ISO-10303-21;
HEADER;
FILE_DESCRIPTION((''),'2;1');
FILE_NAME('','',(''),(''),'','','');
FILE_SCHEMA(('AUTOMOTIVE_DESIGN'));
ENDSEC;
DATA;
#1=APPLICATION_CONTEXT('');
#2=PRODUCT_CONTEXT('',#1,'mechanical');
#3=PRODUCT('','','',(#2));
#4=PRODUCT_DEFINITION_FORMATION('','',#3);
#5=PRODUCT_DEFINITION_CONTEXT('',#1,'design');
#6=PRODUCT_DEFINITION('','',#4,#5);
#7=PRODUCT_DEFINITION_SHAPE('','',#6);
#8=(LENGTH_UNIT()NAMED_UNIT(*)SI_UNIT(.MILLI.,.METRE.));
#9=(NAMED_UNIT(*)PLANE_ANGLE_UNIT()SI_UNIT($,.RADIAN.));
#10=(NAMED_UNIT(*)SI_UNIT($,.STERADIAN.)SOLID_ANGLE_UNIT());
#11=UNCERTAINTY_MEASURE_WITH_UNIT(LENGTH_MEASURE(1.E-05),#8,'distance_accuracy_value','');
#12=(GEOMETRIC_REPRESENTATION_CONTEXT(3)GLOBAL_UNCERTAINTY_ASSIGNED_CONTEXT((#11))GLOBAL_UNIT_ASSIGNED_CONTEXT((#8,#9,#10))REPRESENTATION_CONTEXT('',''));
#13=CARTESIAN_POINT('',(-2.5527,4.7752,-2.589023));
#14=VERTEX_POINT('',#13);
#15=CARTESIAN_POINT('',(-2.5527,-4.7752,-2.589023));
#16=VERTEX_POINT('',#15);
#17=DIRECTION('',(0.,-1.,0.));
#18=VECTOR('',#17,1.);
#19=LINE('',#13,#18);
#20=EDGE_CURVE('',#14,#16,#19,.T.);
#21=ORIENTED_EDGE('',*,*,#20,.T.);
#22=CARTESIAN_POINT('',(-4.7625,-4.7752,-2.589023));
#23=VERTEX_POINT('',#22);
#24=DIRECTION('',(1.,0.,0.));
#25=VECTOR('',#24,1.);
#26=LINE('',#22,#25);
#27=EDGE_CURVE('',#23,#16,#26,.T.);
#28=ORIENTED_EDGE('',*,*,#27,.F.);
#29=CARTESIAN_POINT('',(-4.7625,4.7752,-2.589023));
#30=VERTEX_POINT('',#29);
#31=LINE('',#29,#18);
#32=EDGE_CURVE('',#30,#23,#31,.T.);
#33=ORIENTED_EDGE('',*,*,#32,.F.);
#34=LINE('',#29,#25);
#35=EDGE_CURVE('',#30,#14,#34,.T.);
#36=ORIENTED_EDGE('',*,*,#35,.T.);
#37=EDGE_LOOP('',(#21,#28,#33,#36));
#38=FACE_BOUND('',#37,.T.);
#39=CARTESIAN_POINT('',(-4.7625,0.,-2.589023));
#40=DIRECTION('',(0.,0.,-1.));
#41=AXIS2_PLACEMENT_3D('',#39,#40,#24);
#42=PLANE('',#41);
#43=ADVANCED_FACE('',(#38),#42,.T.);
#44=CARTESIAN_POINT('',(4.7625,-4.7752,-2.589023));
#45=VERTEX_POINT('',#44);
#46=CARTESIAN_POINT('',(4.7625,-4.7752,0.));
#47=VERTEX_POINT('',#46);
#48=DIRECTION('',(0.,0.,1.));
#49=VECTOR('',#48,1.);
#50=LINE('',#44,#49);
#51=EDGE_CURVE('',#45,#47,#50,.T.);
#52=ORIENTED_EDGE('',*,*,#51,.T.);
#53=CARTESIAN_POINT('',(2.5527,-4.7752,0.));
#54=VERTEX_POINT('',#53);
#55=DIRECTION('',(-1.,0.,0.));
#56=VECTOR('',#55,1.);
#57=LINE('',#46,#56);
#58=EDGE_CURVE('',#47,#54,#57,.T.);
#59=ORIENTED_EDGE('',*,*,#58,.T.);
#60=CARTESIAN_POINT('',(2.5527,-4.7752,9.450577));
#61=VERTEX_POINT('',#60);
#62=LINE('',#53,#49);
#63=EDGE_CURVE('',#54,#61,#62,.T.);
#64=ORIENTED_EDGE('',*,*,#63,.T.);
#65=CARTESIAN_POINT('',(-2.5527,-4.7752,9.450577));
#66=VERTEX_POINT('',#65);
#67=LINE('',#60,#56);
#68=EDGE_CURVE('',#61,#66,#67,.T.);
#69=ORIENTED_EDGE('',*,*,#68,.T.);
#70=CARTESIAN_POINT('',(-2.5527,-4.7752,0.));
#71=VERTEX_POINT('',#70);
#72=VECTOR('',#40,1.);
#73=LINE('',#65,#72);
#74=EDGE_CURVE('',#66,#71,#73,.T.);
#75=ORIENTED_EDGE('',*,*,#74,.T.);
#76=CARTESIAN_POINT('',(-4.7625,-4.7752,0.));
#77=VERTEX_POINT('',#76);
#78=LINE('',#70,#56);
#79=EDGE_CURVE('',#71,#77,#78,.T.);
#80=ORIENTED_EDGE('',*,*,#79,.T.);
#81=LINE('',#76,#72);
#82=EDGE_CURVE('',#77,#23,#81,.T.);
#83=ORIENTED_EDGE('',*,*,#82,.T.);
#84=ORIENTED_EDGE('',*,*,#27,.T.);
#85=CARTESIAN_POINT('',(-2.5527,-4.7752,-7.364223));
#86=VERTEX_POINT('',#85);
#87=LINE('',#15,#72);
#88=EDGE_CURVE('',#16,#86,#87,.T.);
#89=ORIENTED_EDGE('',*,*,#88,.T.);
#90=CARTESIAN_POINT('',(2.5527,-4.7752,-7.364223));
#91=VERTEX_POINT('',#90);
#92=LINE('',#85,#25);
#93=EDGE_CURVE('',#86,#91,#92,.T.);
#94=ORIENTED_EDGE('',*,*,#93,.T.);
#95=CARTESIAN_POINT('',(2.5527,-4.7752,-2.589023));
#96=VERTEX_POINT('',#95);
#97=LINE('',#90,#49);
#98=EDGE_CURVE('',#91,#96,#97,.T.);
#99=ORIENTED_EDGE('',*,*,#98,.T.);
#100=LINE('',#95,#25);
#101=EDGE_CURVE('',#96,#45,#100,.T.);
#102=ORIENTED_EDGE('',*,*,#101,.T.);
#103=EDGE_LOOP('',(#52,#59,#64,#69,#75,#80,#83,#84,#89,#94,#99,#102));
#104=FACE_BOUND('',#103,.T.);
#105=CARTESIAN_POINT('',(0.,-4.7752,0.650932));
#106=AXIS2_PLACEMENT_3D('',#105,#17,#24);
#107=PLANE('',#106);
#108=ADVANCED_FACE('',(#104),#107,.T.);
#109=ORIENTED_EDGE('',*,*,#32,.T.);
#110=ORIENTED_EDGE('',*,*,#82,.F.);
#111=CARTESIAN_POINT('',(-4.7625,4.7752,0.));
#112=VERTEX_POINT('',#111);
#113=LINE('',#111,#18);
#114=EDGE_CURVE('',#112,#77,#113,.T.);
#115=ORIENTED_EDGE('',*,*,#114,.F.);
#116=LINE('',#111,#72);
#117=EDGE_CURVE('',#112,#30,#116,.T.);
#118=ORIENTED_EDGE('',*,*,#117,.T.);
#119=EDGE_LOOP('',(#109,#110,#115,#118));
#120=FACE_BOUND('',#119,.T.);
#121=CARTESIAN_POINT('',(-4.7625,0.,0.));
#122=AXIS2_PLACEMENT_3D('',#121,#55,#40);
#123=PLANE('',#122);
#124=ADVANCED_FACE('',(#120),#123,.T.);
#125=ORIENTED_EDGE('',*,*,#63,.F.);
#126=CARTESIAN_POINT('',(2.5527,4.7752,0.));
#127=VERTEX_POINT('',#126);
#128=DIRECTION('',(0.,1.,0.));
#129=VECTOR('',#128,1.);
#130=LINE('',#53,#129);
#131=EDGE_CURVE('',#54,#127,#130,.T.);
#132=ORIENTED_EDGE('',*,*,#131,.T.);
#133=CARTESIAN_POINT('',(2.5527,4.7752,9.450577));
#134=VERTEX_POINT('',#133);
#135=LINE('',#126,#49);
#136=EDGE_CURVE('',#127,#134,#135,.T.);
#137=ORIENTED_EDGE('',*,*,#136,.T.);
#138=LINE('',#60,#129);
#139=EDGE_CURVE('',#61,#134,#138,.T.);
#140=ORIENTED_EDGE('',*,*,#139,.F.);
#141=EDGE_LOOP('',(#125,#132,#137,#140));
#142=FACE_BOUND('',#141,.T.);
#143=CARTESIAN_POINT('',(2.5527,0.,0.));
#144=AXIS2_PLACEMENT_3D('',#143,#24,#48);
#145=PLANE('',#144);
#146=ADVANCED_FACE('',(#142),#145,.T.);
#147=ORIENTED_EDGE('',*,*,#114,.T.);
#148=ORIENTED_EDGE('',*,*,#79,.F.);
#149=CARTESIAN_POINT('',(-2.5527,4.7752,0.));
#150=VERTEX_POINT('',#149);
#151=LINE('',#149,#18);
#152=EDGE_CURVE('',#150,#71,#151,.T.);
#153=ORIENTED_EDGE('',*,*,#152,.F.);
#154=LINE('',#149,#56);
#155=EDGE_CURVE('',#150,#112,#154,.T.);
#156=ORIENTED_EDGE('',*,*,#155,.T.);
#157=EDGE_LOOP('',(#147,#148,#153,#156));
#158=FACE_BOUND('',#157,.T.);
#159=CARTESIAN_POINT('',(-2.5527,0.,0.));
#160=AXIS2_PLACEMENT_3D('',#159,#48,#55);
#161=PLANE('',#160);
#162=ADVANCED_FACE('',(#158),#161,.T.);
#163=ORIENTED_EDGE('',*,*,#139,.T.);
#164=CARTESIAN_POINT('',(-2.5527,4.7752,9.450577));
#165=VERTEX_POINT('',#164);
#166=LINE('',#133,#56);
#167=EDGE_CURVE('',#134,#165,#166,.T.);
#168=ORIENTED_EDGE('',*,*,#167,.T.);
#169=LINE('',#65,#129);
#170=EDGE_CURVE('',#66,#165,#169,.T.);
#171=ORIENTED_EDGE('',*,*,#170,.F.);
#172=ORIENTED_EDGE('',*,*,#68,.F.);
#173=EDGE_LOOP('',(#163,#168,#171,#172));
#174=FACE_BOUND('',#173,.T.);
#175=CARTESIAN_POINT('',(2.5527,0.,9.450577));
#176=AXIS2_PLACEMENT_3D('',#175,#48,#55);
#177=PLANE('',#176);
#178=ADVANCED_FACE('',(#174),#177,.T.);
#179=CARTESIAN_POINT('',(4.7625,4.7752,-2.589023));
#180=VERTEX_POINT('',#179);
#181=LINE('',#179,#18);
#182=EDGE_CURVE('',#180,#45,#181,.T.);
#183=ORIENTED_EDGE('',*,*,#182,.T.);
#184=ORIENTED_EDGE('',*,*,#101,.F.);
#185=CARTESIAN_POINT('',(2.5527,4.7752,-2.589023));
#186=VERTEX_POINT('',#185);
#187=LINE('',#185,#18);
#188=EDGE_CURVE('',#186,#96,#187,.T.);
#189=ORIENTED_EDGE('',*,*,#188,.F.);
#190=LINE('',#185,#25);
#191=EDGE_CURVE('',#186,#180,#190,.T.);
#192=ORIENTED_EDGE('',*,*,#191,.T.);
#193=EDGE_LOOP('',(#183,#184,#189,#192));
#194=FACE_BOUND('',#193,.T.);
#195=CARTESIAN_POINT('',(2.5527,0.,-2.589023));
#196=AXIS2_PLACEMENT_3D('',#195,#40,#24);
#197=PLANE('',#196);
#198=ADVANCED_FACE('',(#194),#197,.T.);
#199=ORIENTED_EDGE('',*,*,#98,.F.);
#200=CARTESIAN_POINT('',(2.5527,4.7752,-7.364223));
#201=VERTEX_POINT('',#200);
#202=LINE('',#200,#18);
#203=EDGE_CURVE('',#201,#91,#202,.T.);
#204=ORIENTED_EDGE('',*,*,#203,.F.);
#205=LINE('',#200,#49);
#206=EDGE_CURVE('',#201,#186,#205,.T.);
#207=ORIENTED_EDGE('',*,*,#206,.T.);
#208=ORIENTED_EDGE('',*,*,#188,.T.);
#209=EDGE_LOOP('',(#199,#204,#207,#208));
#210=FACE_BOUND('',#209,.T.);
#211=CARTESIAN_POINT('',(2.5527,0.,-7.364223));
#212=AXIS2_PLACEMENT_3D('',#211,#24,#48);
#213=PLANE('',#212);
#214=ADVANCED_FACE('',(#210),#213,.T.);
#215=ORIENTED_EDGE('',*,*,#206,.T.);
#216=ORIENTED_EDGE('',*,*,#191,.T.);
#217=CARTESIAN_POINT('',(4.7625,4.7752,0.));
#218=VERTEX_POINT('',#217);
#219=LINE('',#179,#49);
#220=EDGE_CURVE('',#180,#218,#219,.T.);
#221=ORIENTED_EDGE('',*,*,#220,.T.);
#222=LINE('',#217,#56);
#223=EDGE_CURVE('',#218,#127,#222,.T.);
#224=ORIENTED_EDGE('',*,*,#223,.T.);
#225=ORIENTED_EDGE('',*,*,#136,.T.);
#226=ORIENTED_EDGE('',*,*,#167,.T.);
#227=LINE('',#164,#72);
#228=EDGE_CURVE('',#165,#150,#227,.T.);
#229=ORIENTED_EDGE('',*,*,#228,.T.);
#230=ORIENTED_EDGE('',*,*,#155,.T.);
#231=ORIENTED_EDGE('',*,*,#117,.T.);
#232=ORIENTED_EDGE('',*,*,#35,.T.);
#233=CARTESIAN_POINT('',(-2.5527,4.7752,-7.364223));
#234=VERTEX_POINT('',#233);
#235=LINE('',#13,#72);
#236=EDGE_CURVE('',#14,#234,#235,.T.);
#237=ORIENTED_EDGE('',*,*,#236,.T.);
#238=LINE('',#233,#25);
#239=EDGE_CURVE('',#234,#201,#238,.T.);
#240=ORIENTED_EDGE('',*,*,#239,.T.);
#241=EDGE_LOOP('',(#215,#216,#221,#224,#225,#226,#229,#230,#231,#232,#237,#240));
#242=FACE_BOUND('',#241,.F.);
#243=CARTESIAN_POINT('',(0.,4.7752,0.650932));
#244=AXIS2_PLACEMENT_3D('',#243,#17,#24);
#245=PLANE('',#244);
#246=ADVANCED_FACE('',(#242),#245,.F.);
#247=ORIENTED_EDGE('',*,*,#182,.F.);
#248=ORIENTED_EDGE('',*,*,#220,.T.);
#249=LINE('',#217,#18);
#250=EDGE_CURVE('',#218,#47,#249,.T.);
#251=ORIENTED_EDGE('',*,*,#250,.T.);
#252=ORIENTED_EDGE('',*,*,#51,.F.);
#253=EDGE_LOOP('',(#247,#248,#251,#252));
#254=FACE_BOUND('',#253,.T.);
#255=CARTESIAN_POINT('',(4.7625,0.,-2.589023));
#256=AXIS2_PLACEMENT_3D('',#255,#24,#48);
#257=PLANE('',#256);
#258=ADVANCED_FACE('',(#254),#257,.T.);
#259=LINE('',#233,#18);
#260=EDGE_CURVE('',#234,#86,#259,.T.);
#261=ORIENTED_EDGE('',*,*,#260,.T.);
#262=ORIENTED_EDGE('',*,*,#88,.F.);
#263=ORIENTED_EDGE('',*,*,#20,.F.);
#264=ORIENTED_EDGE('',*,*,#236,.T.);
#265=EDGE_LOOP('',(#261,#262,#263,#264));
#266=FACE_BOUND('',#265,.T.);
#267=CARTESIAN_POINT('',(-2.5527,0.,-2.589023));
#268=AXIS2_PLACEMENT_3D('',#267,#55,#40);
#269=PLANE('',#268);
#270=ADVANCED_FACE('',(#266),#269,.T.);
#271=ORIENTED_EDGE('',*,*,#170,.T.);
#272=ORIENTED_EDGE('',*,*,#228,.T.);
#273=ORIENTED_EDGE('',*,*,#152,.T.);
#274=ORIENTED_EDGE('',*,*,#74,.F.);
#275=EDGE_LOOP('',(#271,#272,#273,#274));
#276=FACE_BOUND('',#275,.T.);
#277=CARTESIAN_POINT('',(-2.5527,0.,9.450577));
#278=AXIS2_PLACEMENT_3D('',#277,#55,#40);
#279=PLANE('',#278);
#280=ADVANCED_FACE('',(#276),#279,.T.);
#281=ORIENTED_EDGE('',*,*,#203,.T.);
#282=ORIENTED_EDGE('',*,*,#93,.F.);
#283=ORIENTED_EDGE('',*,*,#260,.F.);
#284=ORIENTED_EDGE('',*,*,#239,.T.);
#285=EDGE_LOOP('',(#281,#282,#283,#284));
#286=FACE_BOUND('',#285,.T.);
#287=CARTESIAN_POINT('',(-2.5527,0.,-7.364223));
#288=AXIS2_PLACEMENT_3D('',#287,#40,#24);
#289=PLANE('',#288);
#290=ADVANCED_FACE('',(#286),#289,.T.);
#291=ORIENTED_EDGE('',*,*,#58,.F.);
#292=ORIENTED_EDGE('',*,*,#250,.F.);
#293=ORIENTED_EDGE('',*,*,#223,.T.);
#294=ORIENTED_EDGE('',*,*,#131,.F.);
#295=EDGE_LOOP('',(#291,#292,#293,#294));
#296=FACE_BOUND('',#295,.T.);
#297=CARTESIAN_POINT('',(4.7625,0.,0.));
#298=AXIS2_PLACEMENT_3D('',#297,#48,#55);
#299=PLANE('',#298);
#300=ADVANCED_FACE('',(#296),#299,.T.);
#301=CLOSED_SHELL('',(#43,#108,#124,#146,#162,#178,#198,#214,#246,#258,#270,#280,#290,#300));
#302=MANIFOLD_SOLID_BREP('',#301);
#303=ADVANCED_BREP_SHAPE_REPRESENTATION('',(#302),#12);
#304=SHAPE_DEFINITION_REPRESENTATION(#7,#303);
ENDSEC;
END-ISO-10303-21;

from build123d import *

# Parameters (mm, degrees)
F2_DEPTH = 4.7752


# Not quite as in the source:
# - a variable given as a bare number and used for a length is read in inches; the dataset says mm whatever the document's units were


with BuildPart() as f2:
    # F1 (on Front) → F2 (new body, symmetric)
    with BuildSketch(Plane.XZ):
        Polygon((-2.5527, 9.4505768009), (-2.5527, 0), (-4.7625, 0), (-4.7625, -2.5890231991), (-2.5527, -2.5890231991), (-2.5527, -7.3642231991), (2.5527, -7.3642231991), (2.5527, -2.5890231991), (4.7625, -2.5890231991), (4.7625, 0), (2.5527, 0), (2.5527, 9.4505768009), align=None)
    extrude(amount=F2_DEPTH, both=True)


solid = f2.part
